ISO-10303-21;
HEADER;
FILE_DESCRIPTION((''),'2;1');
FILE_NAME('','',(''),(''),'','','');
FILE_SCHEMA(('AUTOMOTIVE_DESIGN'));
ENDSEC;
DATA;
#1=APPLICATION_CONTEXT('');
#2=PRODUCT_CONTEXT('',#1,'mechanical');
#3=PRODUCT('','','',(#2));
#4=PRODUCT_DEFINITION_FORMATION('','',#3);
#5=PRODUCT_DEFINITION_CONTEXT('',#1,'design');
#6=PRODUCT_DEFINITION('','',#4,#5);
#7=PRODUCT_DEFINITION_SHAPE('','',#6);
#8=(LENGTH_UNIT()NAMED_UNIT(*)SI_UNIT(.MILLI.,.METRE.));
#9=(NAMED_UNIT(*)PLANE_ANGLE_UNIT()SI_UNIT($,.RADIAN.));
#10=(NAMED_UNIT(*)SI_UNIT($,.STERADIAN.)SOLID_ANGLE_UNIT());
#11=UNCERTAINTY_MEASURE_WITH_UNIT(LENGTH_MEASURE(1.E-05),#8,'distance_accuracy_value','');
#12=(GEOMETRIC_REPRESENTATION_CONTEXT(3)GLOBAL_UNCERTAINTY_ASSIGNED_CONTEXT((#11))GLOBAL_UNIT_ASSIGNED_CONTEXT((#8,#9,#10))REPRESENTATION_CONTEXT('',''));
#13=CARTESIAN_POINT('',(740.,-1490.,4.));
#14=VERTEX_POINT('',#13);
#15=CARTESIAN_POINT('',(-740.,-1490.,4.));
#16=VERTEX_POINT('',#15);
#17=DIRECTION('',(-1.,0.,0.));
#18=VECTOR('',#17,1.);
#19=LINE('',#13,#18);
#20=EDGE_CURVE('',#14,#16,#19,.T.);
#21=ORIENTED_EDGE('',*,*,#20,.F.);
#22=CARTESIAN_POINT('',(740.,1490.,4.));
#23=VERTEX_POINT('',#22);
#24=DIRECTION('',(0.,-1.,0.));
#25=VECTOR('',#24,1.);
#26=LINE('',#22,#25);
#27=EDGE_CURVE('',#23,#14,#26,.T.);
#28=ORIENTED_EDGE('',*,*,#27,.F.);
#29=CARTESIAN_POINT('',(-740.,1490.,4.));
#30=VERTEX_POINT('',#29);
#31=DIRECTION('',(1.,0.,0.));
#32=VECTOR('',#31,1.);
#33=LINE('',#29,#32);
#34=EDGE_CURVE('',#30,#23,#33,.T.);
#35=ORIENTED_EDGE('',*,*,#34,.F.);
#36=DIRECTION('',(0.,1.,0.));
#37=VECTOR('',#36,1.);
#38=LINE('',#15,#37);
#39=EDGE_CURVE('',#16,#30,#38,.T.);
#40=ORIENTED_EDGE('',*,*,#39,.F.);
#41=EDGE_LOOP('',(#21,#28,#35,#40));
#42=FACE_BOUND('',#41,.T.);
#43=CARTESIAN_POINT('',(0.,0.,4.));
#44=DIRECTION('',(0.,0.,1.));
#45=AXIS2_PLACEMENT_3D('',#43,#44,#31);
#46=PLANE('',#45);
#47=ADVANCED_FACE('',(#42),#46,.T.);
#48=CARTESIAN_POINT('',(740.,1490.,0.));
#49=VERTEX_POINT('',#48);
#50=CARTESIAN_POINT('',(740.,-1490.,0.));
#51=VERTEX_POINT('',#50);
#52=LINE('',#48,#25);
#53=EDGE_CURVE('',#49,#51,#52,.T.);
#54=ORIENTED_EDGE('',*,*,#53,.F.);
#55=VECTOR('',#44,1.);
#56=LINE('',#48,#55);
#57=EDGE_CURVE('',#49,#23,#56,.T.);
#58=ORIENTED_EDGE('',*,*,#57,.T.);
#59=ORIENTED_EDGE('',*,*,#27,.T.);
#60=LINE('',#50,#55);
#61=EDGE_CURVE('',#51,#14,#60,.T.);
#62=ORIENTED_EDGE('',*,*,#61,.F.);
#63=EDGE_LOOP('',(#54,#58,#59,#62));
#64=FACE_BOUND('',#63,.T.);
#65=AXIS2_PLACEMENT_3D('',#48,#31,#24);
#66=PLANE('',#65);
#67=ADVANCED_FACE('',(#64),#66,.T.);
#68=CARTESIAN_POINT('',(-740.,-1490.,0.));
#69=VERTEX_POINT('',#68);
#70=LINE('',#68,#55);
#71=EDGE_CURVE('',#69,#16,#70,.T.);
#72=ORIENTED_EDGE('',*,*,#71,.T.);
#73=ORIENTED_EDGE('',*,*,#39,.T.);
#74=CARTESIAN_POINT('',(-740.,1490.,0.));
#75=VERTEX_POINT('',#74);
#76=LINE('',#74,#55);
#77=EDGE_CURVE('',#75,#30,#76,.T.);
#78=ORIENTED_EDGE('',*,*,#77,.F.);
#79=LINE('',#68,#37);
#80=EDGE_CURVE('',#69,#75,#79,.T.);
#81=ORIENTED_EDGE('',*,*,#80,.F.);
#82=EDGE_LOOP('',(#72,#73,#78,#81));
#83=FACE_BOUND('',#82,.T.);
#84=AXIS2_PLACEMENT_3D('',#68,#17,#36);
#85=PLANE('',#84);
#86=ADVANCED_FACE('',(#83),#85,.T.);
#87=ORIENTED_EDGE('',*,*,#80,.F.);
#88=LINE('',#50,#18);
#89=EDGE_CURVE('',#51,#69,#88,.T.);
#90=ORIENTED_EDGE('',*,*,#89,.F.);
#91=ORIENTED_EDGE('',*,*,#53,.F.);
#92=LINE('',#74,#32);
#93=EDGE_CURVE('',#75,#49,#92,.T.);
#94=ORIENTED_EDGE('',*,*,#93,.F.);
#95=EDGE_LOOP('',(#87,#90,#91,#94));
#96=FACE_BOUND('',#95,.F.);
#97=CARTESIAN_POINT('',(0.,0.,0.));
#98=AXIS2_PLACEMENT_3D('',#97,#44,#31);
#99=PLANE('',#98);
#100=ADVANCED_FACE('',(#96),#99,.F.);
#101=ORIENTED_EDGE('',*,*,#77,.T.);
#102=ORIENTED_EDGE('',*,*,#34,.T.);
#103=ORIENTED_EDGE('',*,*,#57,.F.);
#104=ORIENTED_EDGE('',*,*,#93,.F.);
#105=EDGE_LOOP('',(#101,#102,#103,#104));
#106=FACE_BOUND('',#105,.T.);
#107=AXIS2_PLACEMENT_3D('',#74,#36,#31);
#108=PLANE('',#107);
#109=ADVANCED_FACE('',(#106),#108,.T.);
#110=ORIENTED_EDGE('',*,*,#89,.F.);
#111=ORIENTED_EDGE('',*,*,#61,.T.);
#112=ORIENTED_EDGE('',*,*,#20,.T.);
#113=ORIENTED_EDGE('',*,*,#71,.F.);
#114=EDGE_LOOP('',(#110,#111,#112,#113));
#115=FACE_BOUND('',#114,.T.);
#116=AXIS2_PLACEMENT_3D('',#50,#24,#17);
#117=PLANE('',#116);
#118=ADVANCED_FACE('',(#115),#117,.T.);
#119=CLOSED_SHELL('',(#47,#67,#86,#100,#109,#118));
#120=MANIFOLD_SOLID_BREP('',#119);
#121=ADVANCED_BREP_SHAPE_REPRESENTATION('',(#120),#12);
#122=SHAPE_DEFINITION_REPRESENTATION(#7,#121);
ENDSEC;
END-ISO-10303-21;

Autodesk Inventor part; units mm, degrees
ref_plane "YZ Plane" through (0, 0, 0) normal (1, 0, 0) x (0, 1, 0)
ref_plane "XZ Plane" through (0, 0, 0) normal (0, 1, 0) x (-1, 0, 0)
ref_plane "XY Plane" through (0, 0, 0) normal (0, 0, 1) x (1, 0, 0)
sketch "Sketch1" plane through (0, 0, 0) normal (0, 0, 1) x (1, 0, 0)
  line L0 (740, -1490) -> (-740, -1490)
  line L1 (-740, -1490) -> (-740, 1490)
  line L2 (-740, 1490) -> (740, 1490)
  line L3 (740, 1490) -> (740, -1490)
  line L4 (740, -1490) -> (-740, 1490) construction
  line L5 (-740, -1490) -> (740, 1490) construction
  point P0 (0, 0)
  dimension "d0" = 1480
  dimension "d1" = 2980
extrude "Plate1" add sketch "Sketch1" along normal blind 4
sketch "Sketch4" plane through (0, 0, 4) normal (0, 0, 1) x (1, 0, 0)
  line L0 (530.9218, -1356.779) -> (530.9218, -1714.4695) construction
  line L1 (530.9218, -1714.4695) -> (479.354, -1714.4695) construction
  line L2 (479.354, -1714.4695) -> (479.354, -1356.779) construction
  line L3 (479.354, -1356.779) -> (530.9218, -1356.779) construction
  line L4 (690.2486, -1238) -> (690.2486, -1335) projected
  line L5 (690.2486, -1335) -> (686.2496, -1335) projected
  line L6 (190.12, -1238) -> (190.12, -1335) projected
  line L7 (190.12, -1335) -> (186.121, -1335) projected
  line L8 (-310.0086, -1238) -> (-310.0086, -1335) projected
  line L9 (-310.0086, -1335) -> (-314.0076, -1335) projected
  ellipse E0 centre (690.2486, 1490.5) end of major axis (690.2486, 1520.5) minor radius 0.6803 (690.2486, 1460.5) -> (690.2486, 1520.5) ccw projected
  line L10 (690.2486, 1460.5) -> (686.2496, 1460.5) projected
  ellipse E1 centre (190.12, 1490.5) end of major axis (190.12, 1520.5) minor radius 0.6803 (190.12, 1460.5) -> (190.12, 1520.5) ccw projected
  line L11 (190.12, 1460.5) -> (186.121, 1460.5) projected
  ellipse E2 centre (-310.0086, 1490.5) end of major axis (-310.0086, 1520.5) minor radius 0.6803 (-310.0086, 1460.5) -> (-310.0086, 1520.5) ccw projected
  line L12 (-310.0086, 1460.5) -> (-314.0076, 1460.5) projected
  line L13 (770, 1252.8333) -> (710, 1252.8333) projected
  line L14 (710, 1248.8333) -> (710, 1252.8333) projected
  line L15 (770, 756.1667) -> (710, 756.1667) projected
  line L16 (710, 752.1667) -> (710, 756.1667) projected
  line L17 (770, 259.5) -> (710, 259.5) projected
  line L18 (710, 255.5) -> (710, 259.5) projected
  line L19 (770, -237.1667) -> (710, -237.1667) projected
  line L20 (710, -241.1667) -> (710, -237.1667) projected
  line L21 (770, -733.8333) -> (710, -733.8333) projected
  line L22 (710, -737.8333) -> (710, -733.8333) projected
  line L23 (770, -1230.5) -> (710, -1230.5) projected
  line L24 (710, -1234.5) -> (710, -1230.5) projected
  line L25 (-710, 1252.8333) -> (-739.3197, 1252.8333) projected
  line L26 (-710, 1248.8333) -> (-710, 1252.8333) projected
  line L27 (-710, 756.1667) -> (-739.3197, 756.1667) projected
  line L28 (-710, 752.1667) -> (-710, 756.1667) projected
  line L29 (-710, 259.5) -> (-739.3197, 259.5) projected
  line L30 (-710, 255.5) -> (-710, 259.5) projected
  line L31 (-710, -237.1667) -> (-739.3197, -237.1667) projected
  line L32 (-710, -241.1667) -> (-710, -237.1667) projected
  line L33 (-710, -733.8333) -> (-739.3197, -733.8333) projected
  line L34 (-710, -737.8333) -> (-710, -733.8333) projected
  line L35 (-710, -1230.5) -> (-739.3197, -1230.5) projected
  line L36 (-710, -1234.5) -> (-710, -1230.5) projected
  point P0 (0, 0)
mark "Mark2"
equation "\"d0\" = Лист_ширина"
equation "\"d2\" = Thickness"
equation "\"BendRadius\" = Thickness"
equation "\"BendReliefWidth\" = Thickness"
equation "\"BendReliefDepth\" = 0.5 * Thickness"
equation "\"CornerReliefSize\" = 4 * Thickness"
equation "\"MinimumRemnant\" = 2 * Thickness"
equation "\"TransitionRadius\" = BendRadius"
equation "\"JacobiRadiusSize\" = BendRadius"
equation "\"GapSize\" = Thickness"
equation "\"Лист_ширина\" = 1480"
equation "\"Thickness\" = 4"
properties part number "GBK 1217 shield 2" material "Steel"
